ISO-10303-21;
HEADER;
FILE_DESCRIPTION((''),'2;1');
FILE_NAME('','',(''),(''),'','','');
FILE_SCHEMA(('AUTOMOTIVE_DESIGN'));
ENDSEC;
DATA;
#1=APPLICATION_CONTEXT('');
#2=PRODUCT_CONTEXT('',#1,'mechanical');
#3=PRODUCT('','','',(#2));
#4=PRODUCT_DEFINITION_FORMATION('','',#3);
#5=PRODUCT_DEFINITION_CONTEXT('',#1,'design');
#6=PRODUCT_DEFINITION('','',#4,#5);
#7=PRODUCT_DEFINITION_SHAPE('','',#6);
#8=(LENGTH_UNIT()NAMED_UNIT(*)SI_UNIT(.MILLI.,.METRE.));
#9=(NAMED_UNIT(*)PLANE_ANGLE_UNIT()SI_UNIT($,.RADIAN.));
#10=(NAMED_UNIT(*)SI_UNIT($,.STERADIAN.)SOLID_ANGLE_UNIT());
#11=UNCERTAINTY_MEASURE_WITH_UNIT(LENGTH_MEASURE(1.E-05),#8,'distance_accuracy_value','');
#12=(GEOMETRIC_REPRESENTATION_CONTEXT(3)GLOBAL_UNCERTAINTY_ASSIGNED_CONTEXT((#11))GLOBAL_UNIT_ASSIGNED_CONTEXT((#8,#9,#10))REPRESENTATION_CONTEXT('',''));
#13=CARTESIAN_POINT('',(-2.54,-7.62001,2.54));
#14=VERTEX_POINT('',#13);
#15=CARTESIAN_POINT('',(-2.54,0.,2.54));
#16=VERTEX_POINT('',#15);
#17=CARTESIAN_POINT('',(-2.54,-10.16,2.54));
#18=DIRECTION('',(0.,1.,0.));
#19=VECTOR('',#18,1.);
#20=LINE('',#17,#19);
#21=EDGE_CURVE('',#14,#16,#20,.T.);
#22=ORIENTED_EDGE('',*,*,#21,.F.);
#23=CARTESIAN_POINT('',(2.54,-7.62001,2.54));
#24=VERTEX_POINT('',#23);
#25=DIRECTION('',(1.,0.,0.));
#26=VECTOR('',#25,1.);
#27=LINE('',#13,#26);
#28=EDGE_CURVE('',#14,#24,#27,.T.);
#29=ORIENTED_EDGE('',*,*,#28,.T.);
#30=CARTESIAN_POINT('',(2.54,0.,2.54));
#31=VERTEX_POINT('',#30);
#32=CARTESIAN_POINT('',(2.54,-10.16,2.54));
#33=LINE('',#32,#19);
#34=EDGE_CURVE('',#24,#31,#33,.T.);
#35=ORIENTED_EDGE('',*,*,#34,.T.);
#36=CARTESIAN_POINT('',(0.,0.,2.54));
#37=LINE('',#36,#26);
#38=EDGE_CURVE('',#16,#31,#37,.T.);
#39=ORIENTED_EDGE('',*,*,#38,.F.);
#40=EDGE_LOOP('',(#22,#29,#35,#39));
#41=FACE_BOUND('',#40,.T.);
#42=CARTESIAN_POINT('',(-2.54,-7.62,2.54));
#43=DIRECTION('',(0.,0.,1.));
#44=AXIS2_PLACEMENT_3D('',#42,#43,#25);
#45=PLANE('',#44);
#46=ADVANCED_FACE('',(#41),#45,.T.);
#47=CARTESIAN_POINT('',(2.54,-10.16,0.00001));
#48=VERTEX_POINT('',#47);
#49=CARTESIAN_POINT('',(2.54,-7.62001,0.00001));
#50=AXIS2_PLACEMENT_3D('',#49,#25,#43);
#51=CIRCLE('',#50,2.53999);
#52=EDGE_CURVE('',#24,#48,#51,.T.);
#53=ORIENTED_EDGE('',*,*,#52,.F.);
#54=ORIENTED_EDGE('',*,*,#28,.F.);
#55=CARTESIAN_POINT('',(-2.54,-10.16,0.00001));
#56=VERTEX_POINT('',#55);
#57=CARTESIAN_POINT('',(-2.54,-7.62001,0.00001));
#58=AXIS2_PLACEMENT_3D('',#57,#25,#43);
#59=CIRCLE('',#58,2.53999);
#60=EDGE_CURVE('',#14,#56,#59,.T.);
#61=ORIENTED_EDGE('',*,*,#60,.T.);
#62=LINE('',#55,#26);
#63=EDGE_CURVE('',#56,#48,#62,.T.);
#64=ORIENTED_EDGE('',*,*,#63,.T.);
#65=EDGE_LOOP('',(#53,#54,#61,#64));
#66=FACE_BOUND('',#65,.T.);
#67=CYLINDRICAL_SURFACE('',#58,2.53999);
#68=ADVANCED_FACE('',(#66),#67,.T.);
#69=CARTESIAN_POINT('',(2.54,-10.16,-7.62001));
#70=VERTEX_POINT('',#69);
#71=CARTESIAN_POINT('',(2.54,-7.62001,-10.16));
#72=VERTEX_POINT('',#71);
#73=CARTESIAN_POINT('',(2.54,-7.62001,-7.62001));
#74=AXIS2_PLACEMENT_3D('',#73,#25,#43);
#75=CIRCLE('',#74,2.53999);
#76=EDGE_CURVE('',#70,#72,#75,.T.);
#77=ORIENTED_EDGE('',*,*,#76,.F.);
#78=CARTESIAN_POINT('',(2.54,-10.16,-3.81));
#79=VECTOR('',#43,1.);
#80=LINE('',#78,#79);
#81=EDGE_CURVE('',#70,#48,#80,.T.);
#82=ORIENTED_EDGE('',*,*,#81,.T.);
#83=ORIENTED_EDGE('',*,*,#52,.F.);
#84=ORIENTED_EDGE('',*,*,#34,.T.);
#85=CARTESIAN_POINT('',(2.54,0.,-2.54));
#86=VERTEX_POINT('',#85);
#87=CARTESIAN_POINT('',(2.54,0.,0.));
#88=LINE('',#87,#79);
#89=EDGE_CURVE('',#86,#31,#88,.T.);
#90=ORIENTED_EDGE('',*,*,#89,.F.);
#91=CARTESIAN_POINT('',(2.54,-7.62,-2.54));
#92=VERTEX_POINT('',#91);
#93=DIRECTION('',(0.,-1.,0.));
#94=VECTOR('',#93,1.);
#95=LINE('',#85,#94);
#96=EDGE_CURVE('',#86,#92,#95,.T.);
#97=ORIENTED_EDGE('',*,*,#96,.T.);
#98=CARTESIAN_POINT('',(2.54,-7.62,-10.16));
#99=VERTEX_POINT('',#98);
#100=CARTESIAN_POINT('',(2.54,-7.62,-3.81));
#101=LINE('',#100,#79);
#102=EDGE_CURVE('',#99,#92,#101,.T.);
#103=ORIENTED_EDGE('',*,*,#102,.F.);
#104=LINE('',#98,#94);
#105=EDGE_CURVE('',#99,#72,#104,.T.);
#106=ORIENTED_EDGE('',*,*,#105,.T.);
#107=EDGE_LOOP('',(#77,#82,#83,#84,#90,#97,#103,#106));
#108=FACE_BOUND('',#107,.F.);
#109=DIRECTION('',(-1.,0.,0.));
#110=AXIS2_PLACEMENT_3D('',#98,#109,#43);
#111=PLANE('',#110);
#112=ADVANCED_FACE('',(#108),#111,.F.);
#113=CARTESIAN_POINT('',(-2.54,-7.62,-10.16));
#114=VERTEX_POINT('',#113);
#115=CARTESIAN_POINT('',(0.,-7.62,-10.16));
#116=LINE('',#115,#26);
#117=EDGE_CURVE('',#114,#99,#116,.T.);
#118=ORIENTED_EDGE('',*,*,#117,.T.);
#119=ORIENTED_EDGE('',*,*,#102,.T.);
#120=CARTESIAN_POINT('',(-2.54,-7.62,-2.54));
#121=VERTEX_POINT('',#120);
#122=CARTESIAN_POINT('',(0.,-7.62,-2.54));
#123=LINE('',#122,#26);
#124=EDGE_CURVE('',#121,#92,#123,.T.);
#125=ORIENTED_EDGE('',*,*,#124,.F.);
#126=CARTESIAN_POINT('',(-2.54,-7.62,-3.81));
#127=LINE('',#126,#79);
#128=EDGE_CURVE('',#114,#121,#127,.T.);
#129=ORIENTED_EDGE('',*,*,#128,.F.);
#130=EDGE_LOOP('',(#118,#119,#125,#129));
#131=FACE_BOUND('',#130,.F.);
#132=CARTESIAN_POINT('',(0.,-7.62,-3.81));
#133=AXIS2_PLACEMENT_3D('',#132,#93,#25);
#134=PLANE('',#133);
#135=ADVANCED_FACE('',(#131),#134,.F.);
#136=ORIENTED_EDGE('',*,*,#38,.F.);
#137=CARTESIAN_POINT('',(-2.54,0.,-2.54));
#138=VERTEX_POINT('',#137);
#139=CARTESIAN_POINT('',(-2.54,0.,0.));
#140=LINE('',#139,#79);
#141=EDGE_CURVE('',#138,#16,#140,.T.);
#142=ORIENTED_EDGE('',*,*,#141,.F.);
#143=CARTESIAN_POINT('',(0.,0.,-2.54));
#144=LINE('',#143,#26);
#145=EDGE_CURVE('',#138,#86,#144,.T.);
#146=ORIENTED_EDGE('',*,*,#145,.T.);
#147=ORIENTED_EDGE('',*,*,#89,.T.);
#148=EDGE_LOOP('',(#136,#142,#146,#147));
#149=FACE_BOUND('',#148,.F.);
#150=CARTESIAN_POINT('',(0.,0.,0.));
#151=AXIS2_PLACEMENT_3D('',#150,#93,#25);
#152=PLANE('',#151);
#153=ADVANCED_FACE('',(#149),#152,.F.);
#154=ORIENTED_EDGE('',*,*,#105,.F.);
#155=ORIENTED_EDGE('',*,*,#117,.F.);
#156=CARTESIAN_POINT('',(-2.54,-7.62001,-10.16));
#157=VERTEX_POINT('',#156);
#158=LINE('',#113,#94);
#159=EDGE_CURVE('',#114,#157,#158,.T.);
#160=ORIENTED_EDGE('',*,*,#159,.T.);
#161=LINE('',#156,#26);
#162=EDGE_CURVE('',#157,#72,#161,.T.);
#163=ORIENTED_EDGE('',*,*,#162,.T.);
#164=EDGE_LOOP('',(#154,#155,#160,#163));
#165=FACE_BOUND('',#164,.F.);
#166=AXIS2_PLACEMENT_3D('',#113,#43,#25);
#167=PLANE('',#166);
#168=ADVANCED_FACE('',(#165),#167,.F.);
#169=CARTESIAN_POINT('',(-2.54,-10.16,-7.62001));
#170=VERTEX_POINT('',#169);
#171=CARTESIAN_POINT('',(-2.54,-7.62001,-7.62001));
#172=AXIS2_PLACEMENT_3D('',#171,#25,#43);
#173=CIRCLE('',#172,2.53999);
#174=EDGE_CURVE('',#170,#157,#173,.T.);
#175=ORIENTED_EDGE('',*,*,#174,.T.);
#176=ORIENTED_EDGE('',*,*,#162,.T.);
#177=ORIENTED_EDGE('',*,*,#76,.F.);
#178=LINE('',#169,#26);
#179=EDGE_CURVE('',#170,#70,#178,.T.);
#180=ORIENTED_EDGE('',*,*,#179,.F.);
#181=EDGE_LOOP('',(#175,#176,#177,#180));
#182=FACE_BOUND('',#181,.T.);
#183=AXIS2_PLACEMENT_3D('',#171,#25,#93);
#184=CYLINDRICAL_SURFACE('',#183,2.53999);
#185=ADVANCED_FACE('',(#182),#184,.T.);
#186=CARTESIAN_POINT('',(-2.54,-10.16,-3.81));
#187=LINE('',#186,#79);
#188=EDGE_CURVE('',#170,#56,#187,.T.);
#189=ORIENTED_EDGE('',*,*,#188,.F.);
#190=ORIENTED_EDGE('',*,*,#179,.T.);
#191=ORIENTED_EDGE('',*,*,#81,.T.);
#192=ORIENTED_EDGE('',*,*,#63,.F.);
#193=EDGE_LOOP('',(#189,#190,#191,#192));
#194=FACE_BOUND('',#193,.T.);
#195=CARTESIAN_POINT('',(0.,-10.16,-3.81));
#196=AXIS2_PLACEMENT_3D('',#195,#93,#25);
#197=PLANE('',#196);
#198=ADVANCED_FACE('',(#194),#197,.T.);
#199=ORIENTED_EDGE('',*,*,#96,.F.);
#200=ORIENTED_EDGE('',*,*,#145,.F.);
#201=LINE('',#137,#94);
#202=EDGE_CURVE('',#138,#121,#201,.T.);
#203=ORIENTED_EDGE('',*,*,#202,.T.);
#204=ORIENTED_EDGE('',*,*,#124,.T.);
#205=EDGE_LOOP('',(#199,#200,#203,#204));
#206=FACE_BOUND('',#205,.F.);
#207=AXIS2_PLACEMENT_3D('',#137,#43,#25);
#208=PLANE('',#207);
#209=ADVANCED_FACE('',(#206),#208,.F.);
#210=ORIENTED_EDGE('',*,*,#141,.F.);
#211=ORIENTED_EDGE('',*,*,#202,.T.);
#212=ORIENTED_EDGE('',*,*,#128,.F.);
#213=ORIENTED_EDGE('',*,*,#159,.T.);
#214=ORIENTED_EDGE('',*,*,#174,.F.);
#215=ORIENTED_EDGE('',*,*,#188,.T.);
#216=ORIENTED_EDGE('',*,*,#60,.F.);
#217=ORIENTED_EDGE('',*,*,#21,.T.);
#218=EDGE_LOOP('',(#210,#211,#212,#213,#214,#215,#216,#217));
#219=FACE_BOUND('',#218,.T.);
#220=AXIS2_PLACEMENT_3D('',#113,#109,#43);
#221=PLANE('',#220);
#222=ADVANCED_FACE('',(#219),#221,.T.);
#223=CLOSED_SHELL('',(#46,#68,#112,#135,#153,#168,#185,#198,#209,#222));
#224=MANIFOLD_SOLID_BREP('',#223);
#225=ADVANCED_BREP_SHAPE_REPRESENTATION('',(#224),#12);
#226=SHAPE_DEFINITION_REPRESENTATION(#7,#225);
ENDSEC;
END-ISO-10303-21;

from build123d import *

# Parameters (mm, degrees)
F0_W     = 5.08
F0_H     = 5.08
F1_DEPTH = 7.62
F2_W     = 5.08
F2_H     = 12.7
F3_DEPTH = 2.54
F4_R     = 2.53999


# Not quite as in the source:
# - a fillet or chamfer is up to 0.001 mm smaller than in the source, because OpenCascade refuses the exact size


with BuildPart() as f1:
    # F0 (on Front) → F1 (new body)
    with BuildSketch(Plane.XZ):
        Rectangle(F0_W, F0_H)
    extrude(amount=F1_DEPTH)

    # F2 (on face) → F3 (join)
    with BuildSketch(Plane.XZ.offset(7.62)):
        with Locations((0, -3.81)):
            Rectangle(F2_W, F2_H)
    extrude(amount=F3_DEPTH)

    # F4 (radius 2.54 in the source; OpenCascade refuses exactly that, so slightly less here)
    f4_edges = [f1.edges().sort_by_distance(p)[0] for p in [
        (0, -10.16, 2.54),
        (0, -10.16, -10.16),
    ]]
    fillet(f4_edges, radius=F4_R)


solid = f1.part
